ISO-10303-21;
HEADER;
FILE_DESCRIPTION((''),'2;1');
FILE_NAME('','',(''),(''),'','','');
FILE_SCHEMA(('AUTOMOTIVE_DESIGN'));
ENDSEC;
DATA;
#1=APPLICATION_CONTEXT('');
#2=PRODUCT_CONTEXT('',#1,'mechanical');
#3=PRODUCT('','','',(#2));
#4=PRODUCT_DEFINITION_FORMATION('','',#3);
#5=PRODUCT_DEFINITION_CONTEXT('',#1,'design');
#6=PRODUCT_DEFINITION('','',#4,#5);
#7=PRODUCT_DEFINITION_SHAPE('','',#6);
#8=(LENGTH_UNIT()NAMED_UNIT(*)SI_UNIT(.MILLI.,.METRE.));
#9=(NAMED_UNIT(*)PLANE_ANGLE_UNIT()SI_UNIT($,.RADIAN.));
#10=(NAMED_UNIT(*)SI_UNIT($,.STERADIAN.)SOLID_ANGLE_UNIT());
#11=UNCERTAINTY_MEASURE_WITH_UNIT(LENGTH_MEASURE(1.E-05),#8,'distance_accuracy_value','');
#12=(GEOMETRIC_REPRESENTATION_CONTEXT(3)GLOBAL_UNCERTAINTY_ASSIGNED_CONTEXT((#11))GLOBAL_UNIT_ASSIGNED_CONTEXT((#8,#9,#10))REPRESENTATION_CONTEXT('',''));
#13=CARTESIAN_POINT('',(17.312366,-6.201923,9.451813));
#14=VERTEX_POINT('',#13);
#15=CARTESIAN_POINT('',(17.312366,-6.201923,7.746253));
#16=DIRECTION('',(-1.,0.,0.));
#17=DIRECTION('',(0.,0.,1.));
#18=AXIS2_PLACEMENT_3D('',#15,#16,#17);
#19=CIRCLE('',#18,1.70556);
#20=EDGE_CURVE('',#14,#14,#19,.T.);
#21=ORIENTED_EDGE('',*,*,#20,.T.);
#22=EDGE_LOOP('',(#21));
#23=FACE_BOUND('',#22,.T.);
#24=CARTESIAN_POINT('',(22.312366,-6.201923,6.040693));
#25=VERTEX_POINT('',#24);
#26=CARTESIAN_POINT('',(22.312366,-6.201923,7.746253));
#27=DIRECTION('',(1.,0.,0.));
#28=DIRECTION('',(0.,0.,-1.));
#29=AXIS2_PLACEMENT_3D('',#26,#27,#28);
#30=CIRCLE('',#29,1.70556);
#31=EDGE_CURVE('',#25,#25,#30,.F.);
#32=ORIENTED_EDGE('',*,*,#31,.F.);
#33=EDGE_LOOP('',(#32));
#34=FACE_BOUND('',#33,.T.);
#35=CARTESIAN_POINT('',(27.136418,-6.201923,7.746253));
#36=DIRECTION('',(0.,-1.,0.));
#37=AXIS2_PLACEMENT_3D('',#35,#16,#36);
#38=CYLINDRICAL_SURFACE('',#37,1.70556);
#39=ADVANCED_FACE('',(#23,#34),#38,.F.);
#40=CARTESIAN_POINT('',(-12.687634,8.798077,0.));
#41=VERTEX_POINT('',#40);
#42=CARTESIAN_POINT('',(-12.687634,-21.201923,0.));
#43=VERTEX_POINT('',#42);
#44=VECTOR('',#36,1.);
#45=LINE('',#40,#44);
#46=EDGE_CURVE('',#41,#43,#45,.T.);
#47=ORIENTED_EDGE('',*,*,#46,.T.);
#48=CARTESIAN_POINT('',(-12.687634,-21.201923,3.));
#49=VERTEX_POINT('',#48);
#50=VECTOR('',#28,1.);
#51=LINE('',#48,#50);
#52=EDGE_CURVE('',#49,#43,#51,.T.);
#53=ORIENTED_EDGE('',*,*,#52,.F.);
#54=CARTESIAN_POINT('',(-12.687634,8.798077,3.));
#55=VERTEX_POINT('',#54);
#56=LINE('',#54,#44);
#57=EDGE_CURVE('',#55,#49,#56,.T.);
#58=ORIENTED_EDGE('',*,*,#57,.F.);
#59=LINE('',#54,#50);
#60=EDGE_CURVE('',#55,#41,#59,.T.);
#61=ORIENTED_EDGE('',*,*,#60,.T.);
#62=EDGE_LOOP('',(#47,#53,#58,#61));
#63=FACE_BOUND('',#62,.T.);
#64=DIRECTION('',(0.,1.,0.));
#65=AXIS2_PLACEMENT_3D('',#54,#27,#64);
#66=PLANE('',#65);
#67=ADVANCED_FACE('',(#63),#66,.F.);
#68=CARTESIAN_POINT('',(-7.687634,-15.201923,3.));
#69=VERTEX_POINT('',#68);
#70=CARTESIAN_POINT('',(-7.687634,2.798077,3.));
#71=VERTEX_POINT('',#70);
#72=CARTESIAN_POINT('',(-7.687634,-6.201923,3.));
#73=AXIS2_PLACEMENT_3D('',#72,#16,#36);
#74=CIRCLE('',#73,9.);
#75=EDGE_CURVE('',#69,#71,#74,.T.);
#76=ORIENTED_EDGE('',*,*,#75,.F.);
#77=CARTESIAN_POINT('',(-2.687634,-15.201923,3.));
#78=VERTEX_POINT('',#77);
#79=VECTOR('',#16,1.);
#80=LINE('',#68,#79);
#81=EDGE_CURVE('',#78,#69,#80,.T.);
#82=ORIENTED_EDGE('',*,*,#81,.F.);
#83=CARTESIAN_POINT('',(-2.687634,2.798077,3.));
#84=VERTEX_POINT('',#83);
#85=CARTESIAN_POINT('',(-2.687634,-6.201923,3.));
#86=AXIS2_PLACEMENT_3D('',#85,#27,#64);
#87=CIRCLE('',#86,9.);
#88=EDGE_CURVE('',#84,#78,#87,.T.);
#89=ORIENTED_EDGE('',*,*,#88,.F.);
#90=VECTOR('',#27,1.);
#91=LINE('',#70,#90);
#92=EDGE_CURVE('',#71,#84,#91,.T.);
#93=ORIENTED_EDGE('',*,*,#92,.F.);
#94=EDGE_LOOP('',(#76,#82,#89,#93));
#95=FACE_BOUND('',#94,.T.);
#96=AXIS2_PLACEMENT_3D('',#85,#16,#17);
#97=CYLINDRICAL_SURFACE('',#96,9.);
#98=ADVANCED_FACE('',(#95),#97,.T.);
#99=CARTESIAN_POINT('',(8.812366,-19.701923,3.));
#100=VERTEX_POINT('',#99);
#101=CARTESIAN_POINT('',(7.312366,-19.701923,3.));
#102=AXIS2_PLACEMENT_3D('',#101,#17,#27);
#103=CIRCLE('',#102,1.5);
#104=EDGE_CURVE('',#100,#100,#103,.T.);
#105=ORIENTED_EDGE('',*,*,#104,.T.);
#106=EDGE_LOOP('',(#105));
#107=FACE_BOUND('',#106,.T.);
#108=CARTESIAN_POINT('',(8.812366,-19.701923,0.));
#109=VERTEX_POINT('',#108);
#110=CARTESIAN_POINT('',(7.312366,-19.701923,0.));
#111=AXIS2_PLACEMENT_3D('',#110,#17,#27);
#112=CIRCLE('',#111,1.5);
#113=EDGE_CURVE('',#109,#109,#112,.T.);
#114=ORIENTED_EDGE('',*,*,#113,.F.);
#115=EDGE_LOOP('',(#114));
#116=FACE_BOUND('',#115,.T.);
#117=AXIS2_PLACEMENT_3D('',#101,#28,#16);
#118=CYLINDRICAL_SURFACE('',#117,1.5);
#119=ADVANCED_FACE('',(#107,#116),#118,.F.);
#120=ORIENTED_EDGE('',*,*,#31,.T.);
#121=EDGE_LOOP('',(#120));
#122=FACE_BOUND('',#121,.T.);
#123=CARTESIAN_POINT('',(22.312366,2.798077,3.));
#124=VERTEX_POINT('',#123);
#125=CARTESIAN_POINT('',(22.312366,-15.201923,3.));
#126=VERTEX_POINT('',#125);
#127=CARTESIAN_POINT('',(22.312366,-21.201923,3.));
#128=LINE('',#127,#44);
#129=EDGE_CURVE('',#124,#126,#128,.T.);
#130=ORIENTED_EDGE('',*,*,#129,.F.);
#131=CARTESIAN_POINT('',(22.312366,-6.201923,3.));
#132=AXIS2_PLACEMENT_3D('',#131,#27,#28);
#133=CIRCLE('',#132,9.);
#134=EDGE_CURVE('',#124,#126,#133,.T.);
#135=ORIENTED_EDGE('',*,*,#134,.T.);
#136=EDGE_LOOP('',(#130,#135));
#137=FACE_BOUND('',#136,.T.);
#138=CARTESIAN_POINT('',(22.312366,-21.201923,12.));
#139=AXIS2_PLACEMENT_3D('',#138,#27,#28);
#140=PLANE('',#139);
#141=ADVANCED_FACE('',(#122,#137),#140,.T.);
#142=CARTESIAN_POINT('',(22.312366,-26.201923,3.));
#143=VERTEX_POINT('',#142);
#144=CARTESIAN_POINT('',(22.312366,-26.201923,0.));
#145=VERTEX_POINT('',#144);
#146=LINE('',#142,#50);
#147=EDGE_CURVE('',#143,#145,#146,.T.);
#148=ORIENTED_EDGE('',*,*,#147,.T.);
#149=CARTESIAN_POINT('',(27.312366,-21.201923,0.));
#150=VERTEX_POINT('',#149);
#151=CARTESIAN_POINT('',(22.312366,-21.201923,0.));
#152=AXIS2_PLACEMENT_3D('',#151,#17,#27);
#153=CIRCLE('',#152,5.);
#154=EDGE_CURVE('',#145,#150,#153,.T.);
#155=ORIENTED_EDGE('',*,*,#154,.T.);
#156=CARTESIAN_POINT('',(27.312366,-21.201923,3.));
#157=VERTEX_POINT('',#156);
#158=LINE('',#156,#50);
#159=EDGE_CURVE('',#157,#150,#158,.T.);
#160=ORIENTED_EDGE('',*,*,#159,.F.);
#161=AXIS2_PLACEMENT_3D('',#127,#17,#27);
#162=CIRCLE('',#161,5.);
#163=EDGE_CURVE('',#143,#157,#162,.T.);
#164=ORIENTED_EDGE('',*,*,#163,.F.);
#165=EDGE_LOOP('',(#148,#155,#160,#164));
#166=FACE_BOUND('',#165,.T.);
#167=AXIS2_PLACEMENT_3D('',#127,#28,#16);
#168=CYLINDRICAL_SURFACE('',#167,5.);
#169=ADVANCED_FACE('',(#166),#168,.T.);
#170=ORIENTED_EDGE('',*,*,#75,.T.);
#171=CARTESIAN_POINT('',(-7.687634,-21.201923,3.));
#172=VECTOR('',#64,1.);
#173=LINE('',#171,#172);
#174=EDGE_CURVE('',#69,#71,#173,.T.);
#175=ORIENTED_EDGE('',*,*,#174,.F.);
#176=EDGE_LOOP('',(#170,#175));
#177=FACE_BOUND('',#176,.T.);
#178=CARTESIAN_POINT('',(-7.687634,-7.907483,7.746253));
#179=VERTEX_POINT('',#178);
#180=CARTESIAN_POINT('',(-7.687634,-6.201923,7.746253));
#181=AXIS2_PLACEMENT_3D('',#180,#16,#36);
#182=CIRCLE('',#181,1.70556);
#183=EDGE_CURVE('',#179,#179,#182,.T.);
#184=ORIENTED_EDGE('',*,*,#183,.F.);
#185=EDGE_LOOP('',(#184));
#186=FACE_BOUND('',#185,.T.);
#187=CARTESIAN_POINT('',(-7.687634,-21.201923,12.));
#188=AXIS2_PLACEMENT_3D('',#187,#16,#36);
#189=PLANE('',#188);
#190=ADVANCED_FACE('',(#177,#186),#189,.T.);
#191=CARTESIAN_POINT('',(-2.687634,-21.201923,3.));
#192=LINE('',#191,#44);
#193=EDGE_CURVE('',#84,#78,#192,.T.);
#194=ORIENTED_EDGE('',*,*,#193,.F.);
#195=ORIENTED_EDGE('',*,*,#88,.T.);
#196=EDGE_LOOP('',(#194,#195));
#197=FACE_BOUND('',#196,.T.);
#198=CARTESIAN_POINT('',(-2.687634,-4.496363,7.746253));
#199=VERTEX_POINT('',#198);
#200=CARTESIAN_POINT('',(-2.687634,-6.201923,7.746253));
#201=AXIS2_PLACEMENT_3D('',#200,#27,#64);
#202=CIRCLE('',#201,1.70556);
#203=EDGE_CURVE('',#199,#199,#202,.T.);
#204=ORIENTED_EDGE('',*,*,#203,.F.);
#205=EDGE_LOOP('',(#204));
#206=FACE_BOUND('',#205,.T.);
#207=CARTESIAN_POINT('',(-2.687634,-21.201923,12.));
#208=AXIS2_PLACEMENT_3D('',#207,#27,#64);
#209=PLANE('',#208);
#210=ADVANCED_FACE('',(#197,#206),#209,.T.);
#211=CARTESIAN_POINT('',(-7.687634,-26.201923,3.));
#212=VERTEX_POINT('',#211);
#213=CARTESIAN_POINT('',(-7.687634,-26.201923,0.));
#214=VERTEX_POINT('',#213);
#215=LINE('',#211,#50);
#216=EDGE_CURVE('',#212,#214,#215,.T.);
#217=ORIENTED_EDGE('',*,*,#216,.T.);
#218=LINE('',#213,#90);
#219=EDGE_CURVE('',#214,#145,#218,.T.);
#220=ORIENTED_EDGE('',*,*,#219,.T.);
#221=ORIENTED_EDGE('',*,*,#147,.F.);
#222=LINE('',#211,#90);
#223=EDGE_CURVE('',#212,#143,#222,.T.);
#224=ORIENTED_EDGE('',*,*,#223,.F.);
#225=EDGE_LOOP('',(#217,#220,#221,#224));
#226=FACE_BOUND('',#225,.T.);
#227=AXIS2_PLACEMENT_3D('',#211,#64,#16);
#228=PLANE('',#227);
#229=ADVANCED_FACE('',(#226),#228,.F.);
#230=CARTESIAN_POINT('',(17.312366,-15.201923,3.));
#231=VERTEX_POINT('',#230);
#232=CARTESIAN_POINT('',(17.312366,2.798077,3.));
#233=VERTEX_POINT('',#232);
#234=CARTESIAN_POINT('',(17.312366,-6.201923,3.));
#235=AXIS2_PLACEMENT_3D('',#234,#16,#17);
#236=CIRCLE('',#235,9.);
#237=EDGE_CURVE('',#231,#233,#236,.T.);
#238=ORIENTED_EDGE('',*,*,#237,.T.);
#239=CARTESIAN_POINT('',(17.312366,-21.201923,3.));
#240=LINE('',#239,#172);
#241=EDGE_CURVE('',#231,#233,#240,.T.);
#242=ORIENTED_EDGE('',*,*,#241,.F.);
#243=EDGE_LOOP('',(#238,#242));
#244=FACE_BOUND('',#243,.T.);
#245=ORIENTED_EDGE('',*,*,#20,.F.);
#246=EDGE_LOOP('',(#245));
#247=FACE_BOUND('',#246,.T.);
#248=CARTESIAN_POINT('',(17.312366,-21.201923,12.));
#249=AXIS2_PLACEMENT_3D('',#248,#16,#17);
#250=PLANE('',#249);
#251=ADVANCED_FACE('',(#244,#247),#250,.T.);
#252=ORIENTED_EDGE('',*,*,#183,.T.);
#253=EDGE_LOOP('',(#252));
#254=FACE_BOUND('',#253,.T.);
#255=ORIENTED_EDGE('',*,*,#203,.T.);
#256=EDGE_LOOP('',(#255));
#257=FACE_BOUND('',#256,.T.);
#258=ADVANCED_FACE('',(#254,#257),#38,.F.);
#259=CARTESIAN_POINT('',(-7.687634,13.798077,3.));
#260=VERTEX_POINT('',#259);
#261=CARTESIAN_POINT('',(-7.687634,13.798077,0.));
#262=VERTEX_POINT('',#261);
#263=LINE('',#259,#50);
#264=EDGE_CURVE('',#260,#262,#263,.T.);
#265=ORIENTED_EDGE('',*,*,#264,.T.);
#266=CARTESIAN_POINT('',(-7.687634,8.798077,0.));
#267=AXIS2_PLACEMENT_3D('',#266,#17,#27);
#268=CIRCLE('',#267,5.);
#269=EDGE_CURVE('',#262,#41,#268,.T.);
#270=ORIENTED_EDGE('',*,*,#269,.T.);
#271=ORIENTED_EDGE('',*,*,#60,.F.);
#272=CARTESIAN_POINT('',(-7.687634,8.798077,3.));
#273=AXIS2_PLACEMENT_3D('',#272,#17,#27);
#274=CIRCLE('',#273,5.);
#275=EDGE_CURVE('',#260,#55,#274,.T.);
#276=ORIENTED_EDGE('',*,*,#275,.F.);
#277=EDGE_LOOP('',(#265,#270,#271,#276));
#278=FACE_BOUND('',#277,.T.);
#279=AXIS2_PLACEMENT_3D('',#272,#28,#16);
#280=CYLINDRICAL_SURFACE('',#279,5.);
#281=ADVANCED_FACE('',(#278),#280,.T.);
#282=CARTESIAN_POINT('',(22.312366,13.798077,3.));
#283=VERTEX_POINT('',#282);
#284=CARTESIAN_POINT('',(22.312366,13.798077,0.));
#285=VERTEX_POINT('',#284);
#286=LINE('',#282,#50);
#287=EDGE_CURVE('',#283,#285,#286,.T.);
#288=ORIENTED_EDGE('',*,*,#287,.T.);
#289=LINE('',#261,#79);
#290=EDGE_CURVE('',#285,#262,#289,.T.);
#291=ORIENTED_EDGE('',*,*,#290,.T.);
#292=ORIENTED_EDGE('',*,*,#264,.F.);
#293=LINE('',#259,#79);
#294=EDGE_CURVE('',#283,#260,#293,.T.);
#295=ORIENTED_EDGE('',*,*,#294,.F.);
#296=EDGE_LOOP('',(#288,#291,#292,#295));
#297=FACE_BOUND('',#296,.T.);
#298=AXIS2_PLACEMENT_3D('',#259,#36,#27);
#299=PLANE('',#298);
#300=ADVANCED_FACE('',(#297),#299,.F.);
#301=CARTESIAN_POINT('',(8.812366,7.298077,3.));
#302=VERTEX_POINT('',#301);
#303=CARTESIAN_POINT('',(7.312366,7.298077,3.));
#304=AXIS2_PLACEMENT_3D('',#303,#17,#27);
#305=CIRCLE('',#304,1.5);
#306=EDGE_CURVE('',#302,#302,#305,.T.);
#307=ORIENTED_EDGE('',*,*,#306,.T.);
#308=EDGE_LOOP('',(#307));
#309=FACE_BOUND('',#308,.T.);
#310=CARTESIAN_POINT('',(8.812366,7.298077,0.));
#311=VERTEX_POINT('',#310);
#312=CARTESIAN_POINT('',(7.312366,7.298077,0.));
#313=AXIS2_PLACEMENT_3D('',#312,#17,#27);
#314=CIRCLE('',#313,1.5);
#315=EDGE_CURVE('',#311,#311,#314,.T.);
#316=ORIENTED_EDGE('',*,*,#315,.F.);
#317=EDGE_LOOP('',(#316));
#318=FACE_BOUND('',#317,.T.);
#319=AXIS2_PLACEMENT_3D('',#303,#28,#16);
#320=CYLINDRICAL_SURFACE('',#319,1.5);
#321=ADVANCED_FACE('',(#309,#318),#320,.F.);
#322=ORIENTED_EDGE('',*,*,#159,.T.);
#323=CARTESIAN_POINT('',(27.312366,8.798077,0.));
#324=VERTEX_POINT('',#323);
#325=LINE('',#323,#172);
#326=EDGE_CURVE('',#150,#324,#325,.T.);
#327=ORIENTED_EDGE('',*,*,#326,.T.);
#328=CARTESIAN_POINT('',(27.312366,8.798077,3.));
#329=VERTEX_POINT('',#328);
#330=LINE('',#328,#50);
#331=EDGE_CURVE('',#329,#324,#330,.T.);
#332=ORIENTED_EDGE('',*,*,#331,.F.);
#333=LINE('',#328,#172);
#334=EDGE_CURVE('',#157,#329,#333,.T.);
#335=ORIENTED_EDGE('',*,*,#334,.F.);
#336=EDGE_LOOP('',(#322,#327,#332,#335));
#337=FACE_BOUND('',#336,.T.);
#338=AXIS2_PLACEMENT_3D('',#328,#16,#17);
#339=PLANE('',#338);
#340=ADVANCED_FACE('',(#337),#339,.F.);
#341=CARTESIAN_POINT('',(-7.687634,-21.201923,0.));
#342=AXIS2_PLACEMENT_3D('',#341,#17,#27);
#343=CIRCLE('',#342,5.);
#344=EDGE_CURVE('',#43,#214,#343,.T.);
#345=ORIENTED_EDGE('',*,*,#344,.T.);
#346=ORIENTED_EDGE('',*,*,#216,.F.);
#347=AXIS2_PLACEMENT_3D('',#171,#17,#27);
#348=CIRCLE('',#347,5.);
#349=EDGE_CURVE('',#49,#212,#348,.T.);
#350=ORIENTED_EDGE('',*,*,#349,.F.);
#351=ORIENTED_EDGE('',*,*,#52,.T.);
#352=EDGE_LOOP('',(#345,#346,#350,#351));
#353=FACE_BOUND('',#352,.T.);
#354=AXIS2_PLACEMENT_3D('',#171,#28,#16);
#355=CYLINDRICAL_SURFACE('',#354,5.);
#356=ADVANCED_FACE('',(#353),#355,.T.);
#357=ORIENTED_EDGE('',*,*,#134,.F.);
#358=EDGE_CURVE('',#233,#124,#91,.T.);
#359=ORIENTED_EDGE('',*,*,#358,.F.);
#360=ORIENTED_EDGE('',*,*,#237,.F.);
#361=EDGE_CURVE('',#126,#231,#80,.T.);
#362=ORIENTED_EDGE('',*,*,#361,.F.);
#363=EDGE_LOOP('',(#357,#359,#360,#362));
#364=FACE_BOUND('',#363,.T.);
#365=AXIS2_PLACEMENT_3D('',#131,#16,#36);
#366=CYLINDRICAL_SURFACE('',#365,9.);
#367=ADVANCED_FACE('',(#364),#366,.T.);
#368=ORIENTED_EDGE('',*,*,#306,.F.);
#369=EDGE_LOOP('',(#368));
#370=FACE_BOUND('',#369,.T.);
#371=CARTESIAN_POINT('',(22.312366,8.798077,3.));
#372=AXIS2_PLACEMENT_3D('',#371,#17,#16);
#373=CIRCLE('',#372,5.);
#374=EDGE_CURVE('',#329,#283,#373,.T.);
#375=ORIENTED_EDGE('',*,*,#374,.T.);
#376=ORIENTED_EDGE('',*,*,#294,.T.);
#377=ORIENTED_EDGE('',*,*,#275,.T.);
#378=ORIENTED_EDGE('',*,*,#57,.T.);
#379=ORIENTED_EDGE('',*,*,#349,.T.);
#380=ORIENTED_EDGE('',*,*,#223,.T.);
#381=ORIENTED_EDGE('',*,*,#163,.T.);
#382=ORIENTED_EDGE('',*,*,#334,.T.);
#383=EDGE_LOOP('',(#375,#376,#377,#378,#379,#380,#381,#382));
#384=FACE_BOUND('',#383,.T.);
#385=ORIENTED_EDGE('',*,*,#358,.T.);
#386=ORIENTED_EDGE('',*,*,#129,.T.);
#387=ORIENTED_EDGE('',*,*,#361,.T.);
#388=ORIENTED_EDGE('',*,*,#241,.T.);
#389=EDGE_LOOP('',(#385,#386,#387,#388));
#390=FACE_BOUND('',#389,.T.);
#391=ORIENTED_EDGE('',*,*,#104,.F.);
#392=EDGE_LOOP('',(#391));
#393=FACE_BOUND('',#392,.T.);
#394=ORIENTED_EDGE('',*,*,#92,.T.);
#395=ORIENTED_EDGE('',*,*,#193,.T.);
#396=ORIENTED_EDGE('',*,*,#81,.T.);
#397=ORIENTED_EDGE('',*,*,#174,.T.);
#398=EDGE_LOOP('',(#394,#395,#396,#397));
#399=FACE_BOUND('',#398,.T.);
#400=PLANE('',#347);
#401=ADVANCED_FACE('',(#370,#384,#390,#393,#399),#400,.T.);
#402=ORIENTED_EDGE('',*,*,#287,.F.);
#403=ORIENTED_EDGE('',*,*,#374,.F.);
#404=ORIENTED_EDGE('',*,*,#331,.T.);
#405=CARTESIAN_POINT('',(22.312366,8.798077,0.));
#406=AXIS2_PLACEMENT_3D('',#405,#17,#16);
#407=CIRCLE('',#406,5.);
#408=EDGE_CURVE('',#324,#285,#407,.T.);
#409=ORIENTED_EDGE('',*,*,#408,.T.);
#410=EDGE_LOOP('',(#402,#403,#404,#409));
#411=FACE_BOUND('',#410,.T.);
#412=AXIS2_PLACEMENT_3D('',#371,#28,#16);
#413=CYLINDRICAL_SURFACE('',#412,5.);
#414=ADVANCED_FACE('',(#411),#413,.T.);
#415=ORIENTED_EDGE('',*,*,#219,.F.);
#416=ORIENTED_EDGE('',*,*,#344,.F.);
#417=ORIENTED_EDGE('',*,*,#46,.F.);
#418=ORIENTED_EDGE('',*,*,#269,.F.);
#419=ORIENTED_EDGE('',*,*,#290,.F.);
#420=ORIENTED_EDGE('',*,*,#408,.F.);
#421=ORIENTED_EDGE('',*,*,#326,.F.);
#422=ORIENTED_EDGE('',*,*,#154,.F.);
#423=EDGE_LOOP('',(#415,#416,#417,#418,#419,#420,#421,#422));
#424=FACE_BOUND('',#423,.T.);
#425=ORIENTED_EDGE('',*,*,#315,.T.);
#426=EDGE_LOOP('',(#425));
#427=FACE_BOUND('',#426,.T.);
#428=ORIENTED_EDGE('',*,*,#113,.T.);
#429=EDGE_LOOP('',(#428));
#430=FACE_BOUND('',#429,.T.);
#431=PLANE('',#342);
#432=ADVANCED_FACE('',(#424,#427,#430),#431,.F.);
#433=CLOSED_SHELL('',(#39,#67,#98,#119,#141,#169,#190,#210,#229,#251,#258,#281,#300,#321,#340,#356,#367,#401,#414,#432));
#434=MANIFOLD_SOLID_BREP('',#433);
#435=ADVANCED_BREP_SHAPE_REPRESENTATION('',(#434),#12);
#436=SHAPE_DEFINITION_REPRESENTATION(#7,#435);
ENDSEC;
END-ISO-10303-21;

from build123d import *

# Parameters (mm, degrees)
CROQUIS1_R              = 1.5
SALIENTE_EXTRUIR1_DEPTH = 3
SALIENTE_EXTRUIR2_START = 3
CROQUIS2_W              = 5
CROQUIS2_H              = 18
SALIENTE_EXTRUIR2_DEPTH = 9
REDONDEO6_R             = 9
REDONDEO7_R             = 9
CORTAR_EXTRUIR1_REACH   = 47.338
CROQUIS3_R              = 1.705559653


with BuildPart() as part:
    # Croquis1 → Saliente-Extruir1 (new body)
    with BuildSketch(Plane.XY):
        with BuildLine():
            Line((-7.68763367, 13.798076923), (22.31236633, 13.798076923))
            ThreePointArc((22.31236633, 13.798076923), (25.847900236, 12.333610829), (27.31236633, 8.798076923))
            Line((27.31236633, 8.798076923), (27.31236633, -21.201923077))
            ThreePointArc((27.31236633, -21.201923077), (25.847900236, -24.737456983), (22.31236633, -26.201923077))
            Line((22.31236633, -26.201923077), (-7.68763367, -26.201923077))
            ThreePointArc((-7.68763367, -26.201923077), (-11.223167576, -24.737456983), (-12.68763367, -21.201923077))
            Line((-12.68763367, -21.201923077), (-12.68763367, 8.798076923))
            ThreePointArc((-12.68763367, 8.798076923), (-11.223167576, 12.333610829), (-7.68763367, 13.798076923))
        make_face()
        with Locations((7.31236633, 7.298076923)):
            Circle(CROQUIS1_R, mode=Mode.SUBTRACT)
        with Locations((7.31236633, -19.701923077)):
            Circle(CROQUIS1_R, mode=Mode.SUBTRACT)
    extrude(amount=SALIENTE_EXTRUIR1_DEPTH)

    # Croquis2 → Saliente-Extruir2 (add)
    with BuildSketch(Plane.XY.offset(SALIENTE_EXTRUIR2_START)):
        with Locations((-5.18763367, -6.201923077)):
            Rectangle(CROQUIS2_W, CROQUIS2_H)
        with Locations((19.81236633, -6.201923077)):
            Rectangle(CROQUIS2_W, CROQUIS2_H)
    extrude(amount=SALIENTE_EXTRUIR2_DEPTH)

    # Redondeo6
    redondeo6_edges = [part.edges().sort_by_distance(p)[0] for p in [
        (-5.18763367, 2.798076923, 12),
        (-5.18763367, -15.201923077, 12),
    ]]
    fillet(redondeo6_edges, radius=REDONDEO6_R - 0.0001)  # a hair under: the kernel refuses the full size

    # Redondeo7
    redondeo7_edges = [part.edges().sort_by_distance(p)[0] for p in [
        (19.81236633, -15.201923077, 12),
        (19.81236633, 2.798076923, 12),
    ]]
    fillet(redondeo7_edges, radius=REDONDEO7_R - 0.0001)  # a hair under: the kernel refuses the full size

    # Cortar-Extruir1: up to this face of the body (flat: up to its plane)
    cortar_extruir1_end = Plane(part.part.faces().sort_by_distance((22.31236633, -6.201923077, 6.819731779))[0])
    # Croquis3 → Cortar-Extruir1 (cut, up to the picked face)
    with BuildSketch(Plane.ZY.offset(7.68763367), mode=Mode.PRIVATE) as cortar_extruir1_sk1:
        with Locations((7.74625312, -6.201923077)):
            Circle(CROQUIS3_R)
    cortar_extruir1_tool1 = split(extrude(cortar_extruir1_sk1.sketch, amount=-CORTAR_EXTRUIR1_REACH, mode=Mode.PRIVATE), bisect_by=cortar_extruir1_end, keep=Keep.BOTH, mode=Mode.PRIVATE)
    add(cortar_extruir1_tool1.solids().sort_by(Axis((-7.687634, -6.201923, 7.746253), (1, 0, 0)))[0], mode=Mode.SUBTRACT)


solid = part.part
